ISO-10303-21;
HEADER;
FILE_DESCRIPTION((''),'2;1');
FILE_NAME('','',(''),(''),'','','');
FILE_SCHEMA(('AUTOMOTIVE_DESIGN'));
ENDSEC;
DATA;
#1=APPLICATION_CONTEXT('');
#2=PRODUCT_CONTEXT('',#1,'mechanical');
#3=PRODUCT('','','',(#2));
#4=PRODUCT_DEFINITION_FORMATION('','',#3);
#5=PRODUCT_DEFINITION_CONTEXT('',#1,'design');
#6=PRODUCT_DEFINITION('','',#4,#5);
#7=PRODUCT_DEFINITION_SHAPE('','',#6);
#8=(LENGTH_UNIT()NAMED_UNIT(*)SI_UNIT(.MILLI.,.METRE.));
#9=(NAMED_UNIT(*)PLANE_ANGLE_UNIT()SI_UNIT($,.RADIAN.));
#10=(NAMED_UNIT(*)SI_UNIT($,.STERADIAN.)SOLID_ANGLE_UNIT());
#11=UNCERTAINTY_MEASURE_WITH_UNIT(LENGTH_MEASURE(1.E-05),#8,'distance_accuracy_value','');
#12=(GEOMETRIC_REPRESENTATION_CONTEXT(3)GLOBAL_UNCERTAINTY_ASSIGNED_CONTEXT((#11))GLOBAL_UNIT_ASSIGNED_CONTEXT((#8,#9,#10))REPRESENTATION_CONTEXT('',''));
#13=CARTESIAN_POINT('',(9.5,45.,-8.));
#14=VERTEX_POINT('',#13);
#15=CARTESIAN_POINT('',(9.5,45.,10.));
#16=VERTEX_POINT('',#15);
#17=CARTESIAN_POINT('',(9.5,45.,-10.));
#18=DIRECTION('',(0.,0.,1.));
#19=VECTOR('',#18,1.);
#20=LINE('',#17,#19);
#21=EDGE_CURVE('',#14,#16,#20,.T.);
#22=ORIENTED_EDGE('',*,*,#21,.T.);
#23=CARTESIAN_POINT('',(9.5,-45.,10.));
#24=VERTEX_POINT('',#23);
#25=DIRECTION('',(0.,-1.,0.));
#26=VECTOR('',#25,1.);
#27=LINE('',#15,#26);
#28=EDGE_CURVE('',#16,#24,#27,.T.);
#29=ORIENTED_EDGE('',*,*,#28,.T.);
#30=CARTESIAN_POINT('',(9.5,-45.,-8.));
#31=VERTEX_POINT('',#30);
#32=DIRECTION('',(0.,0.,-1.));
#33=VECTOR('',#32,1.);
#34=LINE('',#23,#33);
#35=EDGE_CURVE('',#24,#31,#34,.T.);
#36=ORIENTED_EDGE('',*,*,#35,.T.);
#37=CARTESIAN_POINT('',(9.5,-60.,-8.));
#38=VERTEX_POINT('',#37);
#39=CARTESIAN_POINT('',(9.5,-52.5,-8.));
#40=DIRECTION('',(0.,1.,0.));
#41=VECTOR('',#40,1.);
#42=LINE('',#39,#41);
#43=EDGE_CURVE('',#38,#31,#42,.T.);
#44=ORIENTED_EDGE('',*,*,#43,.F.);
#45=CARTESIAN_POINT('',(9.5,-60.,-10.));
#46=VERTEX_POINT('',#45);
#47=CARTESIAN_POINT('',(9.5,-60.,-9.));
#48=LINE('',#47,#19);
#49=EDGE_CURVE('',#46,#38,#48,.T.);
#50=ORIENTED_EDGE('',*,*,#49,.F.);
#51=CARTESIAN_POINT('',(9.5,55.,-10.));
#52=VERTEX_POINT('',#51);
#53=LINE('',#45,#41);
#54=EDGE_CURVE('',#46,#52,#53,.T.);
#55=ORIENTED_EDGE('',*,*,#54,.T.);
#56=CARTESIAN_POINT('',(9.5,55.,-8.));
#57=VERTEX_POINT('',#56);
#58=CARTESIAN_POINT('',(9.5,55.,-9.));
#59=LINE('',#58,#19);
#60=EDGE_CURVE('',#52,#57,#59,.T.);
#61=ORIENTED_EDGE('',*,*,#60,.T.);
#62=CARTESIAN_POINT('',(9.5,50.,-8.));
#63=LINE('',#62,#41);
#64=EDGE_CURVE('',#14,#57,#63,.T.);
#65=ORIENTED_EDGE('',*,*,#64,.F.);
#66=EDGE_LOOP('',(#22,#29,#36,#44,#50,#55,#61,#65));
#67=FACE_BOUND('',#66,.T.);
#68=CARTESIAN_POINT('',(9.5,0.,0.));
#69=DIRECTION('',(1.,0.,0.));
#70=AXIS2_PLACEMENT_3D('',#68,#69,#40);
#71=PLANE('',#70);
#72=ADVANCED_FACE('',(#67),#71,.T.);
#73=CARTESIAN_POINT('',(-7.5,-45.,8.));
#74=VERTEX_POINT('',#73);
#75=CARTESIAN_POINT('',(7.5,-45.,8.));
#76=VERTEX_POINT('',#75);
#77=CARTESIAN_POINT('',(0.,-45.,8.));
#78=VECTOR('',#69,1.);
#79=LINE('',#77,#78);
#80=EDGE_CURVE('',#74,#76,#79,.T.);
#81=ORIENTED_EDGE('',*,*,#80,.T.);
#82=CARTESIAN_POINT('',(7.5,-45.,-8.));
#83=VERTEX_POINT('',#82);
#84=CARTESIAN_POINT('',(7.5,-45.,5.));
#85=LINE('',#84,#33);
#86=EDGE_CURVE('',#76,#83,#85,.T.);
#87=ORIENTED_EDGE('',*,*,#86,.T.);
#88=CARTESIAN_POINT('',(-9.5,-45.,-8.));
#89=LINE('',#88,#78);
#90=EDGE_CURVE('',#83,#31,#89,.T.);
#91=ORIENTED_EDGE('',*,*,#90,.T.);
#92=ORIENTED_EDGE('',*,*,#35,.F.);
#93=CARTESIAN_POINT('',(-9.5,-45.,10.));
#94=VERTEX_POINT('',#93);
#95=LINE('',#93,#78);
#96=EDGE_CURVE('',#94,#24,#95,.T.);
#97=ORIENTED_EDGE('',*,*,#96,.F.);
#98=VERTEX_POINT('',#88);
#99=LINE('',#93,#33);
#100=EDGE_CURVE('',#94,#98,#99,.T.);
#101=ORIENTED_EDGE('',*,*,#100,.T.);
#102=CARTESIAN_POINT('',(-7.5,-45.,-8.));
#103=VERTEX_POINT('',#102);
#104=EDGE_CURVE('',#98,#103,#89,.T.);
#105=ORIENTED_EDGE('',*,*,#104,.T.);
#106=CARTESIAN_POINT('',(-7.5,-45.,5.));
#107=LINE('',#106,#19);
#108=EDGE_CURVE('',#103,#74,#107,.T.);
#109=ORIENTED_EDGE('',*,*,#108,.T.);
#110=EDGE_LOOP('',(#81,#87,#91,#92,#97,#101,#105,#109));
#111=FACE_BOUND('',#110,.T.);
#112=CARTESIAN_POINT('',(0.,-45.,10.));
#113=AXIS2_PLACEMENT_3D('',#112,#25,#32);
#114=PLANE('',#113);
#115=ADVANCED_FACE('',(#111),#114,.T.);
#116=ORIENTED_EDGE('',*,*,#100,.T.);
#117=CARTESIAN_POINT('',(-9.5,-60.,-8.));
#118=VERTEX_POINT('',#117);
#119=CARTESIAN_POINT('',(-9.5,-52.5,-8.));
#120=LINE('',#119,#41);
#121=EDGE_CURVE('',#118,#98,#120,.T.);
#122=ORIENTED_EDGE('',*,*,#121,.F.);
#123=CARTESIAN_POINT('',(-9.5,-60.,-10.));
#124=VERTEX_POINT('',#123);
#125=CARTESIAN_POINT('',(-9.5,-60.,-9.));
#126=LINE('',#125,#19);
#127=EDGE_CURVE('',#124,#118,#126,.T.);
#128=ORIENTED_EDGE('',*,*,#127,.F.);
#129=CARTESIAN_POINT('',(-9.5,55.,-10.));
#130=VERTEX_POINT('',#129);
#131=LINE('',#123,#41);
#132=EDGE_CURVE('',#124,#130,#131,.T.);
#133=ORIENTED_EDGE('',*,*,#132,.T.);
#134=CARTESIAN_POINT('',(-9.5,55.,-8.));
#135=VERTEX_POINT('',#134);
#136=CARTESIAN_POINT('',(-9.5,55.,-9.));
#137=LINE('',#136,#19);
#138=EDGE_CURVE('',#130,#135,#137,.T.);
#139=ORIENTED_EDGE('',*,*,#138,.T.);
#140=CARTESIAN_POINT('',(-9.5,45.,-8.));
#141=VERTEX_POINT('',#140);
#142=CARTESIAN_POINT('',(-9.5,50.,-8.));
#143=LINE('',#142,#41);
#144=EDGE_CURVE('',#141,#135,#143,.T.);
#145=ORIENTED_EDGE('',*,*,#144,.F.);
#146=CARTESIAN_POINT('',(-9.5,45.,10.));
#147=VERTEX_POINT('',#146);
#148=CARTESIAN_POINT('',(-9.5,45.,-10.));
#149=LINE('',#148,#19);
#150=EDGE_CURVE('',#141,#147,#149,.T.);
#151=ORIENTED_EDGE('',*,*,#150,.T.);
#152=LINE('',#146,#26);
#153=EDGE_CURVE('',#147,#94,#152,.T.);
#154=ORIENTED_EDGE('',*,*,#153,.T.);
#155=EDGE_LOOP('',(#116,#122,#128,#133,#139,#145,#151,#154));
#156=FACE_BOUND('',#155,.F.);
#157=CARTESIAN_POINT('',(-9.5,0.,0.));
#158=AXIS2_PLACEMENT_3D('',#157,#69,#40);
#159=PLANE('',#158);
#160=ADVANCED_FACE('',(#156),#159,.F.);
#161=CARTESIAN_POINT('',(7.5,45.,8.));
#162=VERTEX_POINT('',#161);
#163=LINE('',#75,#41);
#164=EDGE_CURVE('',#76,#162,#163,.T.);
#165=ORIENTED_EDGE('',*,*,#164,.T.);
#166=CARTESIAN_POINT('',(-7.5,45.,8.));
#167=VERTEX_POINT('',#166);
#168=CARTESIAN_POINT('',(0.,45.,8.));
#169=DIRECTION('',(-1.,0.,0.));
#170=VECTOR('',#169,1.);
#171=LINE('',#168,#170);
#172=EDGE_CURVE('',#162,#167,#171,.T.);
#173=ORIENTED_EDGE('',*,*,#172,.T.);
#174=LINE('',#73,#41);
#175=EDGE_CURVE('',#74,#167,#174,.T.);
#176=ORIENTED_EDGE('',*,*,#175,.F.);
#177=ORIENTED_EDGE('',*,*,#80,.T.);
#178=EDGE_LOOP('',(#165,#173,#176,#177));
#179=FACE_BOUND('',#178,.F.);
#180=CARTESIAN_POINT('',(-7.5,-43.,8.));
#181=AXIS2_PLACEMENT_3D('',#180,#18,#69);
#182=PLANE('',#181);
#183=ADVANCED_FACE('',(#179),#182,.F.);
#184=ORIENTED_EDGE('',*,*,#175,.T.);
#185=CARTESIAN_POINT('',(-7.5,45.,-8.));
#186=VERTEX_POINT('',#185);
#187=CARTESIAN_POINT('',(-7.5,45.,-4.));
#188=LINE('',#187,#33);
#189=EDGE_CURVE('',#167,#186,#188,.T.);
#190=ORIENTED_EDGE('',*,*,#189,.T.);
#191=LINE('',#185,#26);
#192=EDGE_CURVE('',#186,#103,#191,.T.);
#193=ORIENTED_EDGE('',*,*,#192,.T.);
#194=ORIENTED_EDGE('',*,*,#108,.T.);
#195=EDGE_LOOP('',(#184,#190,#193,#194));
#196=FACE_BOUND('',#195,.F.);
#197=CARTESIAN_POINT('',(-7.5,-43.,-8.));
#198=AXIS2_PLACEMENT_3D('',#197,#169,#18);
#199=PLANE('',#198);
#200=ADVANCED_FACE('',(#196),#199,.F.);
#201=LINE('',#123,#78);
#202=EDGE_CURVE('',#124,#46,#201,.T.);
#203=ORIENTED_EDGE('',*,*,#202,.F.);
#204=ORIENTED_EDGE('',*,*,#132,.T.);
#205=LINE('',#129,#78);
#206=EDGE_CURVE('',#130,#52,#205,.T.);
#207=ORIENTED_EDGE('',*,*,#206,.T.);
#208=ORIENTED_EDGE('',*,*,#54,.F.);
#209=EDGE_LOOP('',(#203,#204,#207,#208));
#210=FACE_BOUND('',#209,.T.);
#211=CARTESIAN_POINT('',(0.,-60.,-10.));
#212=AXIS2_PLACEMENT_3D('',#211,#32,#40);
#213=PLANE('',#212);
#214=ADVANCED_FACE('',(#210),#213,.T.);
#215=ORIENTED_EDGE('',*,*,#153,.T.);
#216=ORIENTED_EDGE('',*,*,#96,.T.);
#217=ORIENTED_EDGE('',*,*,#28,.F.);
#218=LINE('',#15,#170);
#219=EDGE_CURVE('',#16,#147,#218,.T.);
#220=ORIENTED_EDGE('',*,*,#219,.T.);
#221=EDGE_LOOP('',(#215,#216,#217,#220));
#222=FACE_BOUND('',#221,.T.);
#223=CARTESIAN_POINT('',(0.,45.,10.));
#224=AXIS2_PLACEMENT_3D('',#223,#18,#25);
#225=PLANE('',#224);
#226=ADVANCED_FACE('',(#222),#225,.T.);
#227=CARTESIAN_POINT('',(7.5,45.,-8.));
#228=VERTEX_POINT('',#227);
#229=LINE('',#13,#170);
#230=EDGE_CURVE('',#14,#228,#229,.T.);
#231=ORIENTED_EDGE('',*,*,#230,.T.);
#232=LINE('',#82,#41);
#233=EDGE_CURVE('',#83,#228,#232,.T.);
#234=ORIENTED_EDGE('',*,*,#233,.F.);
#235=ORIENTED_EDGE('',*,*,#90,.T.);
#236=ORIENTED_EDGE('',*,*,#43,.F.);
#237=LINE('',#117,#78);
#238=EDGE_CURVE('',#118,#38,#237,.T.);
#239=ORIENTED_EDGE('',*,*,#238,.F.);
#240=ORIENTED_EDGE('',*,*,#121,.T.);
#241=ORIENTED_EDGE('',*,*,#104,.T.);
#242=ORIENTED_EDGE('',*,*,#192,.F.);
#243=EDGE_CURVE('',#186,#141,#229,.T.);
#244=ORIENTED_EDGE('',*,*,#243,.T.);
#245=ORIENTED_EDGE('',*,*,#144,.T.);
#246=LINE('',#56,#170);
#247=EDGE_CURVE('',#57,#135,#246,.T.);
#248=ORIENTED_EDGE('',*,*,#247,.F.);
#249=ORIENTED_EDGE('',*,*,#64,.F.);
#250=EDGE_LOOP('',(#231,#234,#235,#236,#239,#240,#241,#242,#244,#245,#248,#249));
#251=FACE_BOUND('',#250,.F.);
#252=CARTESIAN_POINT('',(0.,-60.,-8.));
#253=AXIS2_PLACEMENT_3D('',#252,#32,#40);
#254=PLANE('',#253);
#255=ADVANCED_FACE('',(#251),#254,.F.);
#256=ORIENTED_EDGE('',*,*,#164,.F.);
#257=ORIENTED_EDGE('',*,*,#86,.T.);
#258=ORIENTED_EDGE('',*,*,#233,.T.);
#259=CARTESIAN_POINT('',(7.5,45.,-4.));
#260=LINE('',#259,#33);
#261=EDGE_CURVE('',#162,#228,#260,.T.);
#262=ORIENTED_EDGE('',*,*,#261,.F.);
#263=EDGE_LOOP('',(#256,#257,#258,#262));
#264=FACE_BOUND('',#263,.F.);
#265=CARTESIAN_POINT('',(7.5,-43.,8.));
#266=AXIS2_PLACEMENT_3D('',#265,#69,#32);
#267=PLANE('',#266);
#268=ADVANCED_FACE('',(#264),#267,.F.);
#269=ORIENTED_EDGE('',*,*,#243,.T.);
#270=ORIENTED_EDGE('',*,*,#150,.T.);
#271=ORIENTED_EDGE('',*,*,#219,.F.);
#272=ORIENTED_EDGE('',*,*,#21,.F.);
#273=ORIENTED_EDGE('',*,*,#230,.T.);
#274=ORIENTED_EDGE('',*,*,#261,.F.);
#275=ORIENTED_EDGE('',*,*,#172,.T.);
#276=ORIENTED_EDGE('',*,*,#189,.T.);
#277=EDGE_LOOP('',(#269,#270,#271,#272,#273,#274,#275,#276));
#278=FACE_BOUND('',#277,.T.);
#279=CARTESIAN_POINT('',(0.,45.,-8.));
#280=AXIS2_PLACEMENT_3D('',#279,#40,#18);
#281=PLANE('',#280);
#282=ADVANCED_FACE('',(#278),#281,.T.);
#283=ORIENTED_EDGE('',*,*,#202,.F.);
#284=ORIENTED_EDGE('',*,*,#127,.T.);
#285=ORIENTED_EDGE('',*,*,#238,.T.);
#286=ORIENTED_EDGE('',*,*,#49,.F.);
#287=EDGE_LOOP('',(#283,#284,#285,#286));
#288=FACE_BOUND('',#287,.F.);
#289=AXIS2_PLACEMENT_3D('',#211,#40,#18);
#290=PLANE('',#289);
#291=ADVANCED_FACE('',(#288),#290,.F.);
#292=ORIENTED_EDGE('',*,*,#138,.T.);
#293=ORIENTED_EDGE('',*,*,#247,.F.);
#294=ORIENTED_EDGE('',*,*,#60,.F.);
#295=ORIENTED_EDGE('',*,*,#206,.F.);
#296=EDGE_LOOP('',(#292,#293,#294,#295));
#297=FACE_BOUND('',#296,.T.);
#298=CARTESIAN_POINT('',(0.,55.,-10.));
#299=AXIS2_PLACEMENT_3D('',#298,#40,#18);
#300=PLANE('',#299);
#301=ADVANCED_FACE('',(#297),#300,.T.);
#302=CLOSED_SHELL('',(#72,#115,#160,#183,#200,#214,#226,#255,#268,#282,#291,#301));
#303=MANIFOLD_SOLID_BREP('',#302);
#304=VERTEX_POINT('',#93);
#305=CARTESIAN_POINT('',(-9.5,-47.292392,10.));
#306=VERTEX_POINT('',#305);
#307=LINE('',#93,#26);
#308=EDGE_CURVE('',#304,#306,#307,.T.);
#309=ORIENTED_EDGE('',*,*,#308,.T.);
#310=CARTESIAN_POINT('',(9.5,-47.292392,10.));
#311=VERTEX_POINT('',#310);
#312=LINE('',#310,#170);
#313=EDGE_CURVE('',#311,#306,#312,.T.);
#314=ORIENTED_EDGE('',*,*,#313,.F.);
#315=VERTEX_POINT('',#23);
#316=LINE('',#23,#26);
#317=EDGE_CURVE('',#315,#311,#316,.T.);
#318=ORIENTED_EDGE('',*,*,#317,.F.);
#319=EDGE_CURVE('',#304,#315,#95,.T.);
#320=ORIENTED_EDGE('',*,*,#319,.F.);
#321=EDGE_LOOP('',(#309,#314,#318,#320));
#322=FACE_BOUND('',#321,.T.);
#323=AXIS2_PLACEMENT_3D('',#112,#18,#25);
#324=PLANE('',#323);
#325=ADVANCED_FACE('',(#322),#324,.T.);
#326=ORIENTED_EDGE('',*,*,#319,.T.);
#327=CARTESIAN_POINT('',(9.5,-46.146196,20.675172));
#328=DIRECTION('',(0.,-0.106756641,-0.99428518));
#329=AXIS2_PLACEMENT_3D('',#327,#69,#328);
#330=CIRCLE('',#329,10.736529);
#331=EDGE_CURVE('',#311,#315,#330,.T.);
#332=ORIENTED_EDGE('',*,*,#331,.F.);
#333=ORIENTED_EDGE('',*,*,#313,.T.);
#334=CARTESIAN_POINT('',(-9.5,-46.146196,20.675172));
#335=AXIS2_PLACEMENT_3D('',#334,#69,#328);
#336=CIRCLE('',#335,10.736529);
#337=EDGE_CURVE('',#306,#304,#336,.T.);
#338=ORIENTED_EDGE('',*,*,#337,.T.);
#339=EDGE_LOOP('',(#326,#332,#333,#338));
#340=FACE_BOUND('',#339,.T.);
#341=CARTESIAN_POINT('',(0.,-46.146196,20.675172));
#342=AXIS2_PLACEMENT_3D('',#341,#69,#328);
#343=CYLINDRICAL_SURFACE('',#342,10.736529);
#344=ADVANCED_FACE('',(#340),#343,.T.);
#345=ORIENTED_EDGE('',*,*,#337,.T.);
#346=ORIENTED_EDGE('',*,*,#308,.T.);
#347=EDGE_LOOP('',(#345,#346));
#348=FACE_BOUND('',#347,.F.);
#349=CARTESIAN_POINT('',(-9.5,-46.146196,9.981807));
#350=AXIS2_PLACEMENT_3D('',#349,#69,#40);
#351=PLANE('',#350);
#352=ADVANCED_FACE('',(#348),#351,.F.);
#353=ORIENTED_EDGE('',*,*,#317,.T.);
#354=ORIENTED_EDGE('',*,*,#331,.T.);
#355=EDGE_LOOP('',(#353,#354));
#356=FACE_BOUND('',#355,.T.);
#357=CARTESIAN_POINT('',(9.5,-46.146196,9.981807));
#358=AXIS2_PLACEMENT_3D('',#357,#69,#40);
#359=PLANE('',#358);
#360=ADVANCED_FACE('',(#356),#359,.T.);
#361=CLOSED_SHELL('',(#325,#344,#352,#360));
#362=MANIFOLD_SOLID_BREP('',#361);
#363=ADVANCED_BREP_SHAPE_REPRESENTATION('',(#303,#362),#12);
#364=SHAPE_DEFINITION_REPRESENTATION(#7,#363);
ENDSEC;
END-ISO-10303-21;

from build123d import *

# Parameters (mm, degrees)
F0_W     = 10
F0_H     = 2
F0_W_2   = 15
F1_DEPTH = 9.5
F2_T     = -2


# Not quite as in the source:
# - a shell that OpenCascade refuses in one call is made with other operations: the cavity is built on its own and cut out


with BuildPart() as f1:
    # F0 (on Right) → F1 (new body, symmetric)
    with BuildSketch(Plane.YZ):
        Polygon((45, 10), (-45, 10), (-45, 8), (-45, 0), (-45, -8), (-45, -10), (45, -10), (45, -8), align=None)
        with Locations((50, -9)):
            Rectangle(F0_W, F0_H)
        with Locations((-52.5, -9)):
            Rectangle(F0_W_2, F0_H)
    extrude(amount=F1_DEPTH, both=True)

    # F2: a shell. OpenCascade refuses it in one call, so the cavity is built on its own and cut out:
    # the body offset inwards by the wall thickness, plus a prism from it out through each open face.
    f2_core = offset(f1.part, amount=F2_T, kind=Kind.INTERSECTION, mode=Mode.PRIVATE)
    f2_exits = [f2_core.faces().sort_by_distance(p)[0] for p in [
        (0, -43, 0),
        (0, 43, 0),
    ]]
    add(f2_core, mode=Mode.SUBTRACT)
    extrude(f2_exits, amount=-F2_T, mode=Mode.SUBTRACT)


with BuildPart() as f1b:
    # F0 (on Right) → F1, piece 2 (new body, symmetric)
    with BuildSketch(Plane.YZ):
        with BuildLine():
            ThreePointArc((-47.2923916416, 10), (-46.1461958208, 9.938642669), (-45, 10))
            Line((-45, 10), (-47.2923916416, 10))
        make_face()
    extrude(amount=F1_DEPTH, both=True)


solid = Compound([f1.part, f1b.part])
